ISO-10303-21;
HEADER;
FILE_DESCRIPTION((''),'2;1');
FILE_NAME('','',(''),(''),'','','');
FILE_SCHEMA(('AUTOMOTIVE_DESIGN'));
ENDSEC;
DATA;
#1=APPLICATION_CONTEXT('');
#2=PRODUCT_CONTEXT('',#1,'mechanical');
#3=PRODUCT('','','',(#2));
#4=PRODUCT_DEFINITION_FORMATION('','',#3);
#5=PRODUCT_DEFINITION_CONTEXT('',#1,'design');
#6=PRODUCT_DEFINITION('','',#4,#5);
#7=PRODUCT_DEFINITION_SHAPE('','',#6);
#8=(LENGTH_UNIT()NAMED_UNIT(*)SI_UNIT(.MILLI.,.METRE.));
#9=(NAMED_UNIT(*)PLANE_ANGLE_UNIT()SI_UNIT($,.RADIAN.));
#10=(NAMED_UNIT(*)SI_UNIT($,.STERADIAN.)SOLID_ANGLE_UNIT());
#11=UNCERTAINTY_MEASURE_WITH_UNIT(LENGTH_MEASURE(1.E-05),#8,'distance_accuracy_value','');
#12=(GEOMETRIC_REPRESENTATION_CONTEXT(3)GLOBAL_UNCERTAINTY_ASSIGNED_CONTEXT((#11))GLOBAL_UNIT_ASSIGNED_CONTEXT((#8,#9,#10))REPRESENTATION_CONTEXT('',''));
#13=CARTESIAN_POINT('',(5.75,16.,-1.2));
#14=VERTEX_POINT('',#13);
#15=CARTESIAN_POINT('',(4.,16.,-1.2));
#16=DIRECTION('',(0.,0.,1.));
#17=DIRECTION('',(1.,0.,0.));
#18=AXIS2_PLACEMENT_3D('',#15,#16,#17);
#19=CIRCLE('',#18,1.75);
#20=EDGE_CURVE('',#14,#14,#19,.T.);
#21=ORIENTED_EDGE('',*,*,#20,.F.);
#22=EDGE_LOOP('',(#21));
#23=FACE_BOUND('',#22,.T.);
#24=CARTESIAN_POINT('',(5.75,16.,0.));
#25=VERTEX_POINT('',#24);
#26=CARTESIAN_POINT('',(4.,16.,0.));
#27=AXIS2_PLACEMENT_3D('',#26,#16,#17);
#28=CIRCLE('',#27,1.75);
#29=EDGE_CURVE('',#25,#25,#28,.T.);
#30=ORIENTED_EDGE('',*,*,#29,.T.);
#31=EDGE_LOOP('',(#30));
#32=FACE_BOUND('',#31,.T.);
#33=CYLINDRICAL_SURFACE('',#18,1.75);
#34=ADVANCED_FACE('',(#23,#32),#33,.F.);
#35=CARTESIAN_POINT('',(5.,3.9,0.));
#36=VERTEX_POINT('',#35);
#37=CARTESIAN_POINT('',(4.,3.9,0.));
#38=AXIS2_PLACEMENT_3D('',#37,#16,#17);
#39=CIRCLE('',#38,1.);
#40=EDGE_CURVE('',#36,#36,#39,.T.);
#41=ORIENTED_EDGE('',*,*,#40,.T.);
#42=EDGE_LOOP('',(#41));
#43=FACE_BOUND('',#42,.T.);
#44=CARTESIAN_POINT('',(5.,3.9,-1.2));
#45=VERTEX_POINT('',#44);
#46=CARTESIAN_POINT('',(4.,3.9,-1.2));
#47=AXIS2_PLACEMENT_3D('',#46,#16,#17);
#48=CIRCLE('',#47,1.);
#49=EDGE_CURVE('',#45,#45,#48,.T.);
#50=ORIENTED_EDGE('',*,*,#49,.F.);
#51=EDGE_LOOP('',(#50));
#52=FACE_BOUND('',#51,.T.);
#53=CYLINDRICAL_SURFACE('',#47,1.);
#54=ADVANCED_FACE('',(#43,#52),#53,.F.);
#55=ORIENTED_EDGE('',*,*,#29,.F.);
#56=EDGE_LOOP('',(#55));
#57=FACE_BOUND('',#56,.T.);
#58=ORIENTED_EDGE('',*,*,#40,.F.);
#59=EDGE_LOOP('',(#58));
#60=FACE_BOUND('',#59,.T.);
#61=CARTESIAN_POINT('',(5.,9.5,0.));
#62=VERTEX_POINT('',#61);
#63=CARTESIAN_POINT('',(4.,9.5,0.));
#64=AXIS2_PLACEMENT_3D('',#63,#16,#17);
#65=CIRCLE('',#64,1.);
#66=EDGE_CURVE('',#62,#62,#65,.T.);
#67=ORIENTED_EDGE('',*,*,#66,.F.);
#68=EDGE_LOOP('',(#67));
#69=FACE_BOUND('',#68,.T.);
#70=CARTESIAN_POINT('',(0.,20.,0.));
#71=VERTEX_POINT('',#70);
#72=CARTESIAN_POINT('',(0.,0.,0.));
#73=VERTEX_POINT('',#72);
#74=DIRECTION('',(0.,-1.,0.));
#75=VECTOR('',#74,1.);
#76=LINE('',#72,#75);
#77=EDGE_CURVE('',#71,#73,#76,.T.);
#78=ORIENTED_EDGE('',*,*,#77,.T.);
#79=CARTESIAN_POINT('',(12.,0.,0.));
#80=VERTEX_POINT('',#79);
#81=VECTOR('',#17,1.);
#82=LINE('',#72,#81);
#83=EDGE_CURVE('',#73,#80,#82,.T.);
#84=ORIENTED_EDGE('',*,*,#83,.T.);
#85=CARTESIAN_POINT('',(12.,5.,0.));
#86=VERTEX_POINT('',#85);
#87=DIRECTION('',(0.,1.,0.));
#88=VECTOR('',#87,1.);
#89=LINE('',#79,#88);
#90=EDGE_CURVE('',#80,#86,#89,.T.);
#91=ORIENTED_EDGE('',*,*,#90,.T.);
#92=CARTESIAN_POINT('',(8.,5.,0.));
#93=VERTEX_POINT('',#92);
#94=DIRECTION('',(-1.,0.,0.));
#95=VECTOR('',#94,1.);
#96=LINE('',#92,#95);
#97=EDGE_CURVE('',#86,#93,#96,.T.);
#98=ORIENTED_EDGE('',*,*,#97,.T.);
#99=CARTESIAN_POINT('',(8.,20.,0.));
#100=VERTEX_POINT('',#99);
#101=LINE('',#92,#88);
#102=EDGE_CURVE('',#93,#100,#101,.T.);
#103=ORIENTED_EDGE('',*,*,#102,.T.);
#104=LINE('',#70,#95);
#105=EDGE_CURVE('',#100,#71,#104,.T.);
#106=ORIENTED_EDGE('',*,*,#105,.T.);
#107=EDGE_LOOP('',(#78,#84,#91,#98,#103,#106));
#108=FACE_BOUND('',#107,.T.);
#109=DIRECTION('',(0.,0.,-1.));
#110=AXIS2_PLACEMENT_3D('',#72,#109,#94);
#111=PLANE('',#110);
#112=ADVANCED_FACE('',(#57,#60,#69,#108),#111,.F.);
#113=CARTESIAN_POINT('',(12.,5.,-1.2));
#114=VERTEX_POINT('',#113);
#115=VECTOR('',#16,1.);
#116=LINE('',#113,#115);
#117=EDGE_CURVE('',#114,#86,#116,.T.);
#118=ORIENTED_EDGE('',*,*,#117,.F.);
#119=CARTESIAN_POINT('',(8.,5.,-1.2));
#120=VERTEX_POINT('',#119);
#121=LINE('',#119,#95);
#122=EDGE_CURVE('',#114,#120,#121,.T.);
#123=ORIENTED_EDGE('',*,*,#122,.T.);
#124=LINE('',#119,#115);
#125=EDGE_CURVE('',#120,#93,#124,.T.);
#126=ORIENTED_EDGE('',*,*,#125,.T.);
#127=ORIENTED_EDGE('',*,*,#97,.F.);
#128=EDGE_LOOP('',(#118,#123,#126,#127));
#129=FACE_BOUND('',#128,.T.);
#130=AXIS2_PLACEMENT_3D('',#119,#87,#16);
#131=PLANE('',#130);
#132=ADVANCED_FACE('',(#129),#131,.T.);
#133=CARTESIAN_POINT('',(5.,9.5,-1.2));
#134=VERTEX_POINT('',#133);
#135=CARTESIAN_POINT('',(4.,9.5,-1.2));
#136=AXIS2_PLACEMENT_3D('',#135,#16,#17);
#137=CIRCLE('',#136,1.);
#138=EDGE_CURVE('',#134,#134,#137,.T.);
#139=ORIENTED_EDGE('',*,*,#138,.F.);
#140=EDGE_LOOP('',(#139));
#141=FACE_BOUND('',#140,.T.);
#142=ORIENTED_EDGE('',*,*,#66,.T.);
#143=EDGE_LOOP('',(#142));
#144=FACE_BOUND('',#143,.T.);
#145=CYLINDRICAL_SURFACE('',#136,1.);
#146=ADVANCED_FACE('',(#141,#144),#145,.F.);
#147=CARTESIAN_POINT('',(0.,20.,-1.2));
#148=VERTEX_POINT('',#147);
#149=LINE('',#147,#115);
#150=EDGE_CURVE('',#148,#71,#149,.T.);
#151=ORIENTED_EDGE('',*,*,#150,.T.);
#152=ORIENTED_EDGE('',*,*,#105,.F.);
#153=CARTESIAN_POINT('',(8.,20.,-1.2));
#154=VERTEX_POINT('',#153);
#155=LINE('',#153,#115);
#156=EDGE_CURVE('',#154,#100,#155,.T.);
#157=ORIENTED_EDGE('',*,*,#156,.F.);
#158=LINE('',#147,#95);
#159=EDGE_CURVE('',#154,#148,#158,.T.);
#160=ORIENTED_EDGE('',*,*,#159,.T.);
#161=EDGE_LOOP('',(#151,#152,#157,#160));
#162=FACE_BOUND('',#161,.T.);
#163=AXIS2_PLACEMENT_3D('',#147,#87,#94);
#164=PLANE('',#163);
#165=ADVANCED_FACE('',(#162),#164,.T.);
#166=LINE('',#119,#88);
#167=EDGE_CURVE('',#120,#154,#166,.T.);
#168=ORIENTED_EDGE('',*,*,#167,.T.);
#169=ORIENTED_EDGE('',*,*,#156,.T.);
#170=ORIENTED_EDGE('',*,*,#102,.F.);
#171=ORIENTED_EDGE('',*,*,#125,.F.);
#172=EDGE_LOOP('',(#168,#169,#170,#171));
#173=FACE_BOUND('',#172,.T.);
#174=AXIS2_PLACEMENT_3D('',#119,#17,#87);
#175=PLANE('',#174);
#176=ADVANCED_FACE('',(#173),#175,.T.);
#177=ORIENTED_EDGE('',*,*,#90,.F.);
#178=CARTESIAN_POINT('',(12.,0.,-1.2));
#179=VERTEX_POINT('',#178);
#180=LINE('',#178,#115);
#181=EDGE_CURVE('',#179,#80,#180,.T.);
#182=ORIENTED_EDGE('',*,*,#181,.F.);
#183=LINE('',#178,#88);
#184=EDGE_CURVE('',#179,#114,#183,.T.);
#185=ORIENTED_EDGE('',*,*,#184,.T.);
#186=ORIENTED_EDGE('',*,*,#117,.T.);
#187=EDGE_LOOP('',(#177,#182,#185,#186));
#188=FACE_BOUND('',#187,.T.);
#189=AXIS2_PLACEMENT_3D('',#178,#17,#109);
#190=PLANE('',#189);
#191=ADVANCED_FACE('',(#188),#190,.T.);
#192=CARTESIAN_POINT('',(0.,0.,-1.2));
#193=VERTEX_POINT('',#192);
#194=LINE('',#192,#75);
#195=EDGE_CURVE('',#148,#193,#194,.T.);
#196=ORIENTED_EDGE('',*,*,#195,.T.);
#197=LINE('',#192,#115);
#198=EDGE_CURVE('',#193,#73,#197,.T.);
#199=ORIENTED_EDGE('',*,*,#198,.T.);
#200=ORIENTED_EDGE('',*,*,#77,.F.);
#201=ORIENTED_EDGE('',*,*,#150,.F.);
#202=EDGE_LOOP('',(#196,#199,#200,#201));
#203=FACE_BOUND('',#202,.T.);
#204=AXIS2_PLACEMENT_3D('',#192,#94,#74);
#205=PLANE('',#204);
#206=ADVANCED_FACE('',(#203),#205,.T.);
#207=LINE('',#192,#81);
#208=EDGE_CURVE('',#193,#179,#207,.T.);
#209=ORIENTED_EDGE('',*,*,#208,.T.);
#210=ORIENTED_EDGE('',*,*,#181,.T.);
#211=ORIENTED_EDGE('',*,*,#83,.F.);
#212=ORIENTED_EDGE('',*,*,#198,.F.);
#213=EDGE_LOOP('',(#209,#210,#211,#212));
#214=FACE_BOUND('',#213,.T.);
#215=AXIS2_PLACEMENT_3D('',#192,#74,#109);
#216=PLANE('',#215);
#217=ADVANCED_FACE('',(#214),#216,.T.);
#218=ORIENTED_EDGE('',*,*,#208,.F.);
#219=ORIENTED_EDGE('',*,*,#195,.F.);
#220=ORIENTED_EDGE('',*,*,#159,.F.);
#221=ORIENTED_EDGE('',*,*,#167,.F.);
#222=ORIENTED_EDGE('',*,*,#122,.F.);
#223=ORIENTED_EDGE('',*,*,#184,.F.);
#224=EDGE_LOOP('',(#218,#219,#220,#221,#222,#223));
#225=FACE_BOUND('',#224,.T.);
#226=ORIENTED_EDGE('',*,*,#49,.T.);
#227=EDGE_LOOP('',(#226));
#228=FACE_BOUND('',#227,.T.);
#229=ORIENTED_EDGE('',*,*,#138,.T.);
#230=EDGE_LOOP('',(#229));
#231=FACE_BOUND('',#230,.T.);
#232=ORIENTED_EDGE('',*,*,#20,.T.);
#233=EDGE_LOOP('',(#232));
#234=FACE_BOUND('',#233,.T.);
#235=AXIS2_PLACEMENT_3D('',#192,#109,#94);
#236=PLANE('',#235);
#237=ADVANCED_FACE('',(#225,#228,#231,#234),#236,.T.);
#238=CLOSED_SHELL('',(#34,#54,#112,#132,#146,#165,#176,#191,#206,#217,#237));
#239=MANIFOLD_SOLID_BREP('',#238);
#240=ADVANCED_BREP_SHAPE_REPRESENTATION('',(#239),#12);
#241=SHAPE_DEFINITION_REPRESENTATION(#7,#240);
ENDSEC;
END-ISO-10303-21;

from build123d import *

# Parameters (mm, degrees)
SKETCH_1_R             = 1.75
SKETCH_1_R_2           = 1
SM_BASE_FLANGE_1_DEPTH = 1.2


# Sheet-metal steps are written as plain solids
with BuildPart() as part:
    # Sketch 1 → Базовая кромка1 (new body)
    with BuildSketch(Plane.XY):
        Polygon((0, 0), (12, 0), (12, 5), (8, 5), (8, 20), (0, 20), align=None)
        with Locations((4, 16)):
            Circle(SKETCH_1_R, mode=Mode.SUBTRACT)
        with Locations((4, 9.5)):
            Circle(SKETCH_1_R_2, mode=Mode.SUBTRACT)
        with Locations((4, 3.9)):
            Circle(SKETCH_1_R_2, mode=Mode.SUBTRACT)
    extrude(amount=-SM_BASE_FLANGE_1_DEPTH)


solid = part.part
